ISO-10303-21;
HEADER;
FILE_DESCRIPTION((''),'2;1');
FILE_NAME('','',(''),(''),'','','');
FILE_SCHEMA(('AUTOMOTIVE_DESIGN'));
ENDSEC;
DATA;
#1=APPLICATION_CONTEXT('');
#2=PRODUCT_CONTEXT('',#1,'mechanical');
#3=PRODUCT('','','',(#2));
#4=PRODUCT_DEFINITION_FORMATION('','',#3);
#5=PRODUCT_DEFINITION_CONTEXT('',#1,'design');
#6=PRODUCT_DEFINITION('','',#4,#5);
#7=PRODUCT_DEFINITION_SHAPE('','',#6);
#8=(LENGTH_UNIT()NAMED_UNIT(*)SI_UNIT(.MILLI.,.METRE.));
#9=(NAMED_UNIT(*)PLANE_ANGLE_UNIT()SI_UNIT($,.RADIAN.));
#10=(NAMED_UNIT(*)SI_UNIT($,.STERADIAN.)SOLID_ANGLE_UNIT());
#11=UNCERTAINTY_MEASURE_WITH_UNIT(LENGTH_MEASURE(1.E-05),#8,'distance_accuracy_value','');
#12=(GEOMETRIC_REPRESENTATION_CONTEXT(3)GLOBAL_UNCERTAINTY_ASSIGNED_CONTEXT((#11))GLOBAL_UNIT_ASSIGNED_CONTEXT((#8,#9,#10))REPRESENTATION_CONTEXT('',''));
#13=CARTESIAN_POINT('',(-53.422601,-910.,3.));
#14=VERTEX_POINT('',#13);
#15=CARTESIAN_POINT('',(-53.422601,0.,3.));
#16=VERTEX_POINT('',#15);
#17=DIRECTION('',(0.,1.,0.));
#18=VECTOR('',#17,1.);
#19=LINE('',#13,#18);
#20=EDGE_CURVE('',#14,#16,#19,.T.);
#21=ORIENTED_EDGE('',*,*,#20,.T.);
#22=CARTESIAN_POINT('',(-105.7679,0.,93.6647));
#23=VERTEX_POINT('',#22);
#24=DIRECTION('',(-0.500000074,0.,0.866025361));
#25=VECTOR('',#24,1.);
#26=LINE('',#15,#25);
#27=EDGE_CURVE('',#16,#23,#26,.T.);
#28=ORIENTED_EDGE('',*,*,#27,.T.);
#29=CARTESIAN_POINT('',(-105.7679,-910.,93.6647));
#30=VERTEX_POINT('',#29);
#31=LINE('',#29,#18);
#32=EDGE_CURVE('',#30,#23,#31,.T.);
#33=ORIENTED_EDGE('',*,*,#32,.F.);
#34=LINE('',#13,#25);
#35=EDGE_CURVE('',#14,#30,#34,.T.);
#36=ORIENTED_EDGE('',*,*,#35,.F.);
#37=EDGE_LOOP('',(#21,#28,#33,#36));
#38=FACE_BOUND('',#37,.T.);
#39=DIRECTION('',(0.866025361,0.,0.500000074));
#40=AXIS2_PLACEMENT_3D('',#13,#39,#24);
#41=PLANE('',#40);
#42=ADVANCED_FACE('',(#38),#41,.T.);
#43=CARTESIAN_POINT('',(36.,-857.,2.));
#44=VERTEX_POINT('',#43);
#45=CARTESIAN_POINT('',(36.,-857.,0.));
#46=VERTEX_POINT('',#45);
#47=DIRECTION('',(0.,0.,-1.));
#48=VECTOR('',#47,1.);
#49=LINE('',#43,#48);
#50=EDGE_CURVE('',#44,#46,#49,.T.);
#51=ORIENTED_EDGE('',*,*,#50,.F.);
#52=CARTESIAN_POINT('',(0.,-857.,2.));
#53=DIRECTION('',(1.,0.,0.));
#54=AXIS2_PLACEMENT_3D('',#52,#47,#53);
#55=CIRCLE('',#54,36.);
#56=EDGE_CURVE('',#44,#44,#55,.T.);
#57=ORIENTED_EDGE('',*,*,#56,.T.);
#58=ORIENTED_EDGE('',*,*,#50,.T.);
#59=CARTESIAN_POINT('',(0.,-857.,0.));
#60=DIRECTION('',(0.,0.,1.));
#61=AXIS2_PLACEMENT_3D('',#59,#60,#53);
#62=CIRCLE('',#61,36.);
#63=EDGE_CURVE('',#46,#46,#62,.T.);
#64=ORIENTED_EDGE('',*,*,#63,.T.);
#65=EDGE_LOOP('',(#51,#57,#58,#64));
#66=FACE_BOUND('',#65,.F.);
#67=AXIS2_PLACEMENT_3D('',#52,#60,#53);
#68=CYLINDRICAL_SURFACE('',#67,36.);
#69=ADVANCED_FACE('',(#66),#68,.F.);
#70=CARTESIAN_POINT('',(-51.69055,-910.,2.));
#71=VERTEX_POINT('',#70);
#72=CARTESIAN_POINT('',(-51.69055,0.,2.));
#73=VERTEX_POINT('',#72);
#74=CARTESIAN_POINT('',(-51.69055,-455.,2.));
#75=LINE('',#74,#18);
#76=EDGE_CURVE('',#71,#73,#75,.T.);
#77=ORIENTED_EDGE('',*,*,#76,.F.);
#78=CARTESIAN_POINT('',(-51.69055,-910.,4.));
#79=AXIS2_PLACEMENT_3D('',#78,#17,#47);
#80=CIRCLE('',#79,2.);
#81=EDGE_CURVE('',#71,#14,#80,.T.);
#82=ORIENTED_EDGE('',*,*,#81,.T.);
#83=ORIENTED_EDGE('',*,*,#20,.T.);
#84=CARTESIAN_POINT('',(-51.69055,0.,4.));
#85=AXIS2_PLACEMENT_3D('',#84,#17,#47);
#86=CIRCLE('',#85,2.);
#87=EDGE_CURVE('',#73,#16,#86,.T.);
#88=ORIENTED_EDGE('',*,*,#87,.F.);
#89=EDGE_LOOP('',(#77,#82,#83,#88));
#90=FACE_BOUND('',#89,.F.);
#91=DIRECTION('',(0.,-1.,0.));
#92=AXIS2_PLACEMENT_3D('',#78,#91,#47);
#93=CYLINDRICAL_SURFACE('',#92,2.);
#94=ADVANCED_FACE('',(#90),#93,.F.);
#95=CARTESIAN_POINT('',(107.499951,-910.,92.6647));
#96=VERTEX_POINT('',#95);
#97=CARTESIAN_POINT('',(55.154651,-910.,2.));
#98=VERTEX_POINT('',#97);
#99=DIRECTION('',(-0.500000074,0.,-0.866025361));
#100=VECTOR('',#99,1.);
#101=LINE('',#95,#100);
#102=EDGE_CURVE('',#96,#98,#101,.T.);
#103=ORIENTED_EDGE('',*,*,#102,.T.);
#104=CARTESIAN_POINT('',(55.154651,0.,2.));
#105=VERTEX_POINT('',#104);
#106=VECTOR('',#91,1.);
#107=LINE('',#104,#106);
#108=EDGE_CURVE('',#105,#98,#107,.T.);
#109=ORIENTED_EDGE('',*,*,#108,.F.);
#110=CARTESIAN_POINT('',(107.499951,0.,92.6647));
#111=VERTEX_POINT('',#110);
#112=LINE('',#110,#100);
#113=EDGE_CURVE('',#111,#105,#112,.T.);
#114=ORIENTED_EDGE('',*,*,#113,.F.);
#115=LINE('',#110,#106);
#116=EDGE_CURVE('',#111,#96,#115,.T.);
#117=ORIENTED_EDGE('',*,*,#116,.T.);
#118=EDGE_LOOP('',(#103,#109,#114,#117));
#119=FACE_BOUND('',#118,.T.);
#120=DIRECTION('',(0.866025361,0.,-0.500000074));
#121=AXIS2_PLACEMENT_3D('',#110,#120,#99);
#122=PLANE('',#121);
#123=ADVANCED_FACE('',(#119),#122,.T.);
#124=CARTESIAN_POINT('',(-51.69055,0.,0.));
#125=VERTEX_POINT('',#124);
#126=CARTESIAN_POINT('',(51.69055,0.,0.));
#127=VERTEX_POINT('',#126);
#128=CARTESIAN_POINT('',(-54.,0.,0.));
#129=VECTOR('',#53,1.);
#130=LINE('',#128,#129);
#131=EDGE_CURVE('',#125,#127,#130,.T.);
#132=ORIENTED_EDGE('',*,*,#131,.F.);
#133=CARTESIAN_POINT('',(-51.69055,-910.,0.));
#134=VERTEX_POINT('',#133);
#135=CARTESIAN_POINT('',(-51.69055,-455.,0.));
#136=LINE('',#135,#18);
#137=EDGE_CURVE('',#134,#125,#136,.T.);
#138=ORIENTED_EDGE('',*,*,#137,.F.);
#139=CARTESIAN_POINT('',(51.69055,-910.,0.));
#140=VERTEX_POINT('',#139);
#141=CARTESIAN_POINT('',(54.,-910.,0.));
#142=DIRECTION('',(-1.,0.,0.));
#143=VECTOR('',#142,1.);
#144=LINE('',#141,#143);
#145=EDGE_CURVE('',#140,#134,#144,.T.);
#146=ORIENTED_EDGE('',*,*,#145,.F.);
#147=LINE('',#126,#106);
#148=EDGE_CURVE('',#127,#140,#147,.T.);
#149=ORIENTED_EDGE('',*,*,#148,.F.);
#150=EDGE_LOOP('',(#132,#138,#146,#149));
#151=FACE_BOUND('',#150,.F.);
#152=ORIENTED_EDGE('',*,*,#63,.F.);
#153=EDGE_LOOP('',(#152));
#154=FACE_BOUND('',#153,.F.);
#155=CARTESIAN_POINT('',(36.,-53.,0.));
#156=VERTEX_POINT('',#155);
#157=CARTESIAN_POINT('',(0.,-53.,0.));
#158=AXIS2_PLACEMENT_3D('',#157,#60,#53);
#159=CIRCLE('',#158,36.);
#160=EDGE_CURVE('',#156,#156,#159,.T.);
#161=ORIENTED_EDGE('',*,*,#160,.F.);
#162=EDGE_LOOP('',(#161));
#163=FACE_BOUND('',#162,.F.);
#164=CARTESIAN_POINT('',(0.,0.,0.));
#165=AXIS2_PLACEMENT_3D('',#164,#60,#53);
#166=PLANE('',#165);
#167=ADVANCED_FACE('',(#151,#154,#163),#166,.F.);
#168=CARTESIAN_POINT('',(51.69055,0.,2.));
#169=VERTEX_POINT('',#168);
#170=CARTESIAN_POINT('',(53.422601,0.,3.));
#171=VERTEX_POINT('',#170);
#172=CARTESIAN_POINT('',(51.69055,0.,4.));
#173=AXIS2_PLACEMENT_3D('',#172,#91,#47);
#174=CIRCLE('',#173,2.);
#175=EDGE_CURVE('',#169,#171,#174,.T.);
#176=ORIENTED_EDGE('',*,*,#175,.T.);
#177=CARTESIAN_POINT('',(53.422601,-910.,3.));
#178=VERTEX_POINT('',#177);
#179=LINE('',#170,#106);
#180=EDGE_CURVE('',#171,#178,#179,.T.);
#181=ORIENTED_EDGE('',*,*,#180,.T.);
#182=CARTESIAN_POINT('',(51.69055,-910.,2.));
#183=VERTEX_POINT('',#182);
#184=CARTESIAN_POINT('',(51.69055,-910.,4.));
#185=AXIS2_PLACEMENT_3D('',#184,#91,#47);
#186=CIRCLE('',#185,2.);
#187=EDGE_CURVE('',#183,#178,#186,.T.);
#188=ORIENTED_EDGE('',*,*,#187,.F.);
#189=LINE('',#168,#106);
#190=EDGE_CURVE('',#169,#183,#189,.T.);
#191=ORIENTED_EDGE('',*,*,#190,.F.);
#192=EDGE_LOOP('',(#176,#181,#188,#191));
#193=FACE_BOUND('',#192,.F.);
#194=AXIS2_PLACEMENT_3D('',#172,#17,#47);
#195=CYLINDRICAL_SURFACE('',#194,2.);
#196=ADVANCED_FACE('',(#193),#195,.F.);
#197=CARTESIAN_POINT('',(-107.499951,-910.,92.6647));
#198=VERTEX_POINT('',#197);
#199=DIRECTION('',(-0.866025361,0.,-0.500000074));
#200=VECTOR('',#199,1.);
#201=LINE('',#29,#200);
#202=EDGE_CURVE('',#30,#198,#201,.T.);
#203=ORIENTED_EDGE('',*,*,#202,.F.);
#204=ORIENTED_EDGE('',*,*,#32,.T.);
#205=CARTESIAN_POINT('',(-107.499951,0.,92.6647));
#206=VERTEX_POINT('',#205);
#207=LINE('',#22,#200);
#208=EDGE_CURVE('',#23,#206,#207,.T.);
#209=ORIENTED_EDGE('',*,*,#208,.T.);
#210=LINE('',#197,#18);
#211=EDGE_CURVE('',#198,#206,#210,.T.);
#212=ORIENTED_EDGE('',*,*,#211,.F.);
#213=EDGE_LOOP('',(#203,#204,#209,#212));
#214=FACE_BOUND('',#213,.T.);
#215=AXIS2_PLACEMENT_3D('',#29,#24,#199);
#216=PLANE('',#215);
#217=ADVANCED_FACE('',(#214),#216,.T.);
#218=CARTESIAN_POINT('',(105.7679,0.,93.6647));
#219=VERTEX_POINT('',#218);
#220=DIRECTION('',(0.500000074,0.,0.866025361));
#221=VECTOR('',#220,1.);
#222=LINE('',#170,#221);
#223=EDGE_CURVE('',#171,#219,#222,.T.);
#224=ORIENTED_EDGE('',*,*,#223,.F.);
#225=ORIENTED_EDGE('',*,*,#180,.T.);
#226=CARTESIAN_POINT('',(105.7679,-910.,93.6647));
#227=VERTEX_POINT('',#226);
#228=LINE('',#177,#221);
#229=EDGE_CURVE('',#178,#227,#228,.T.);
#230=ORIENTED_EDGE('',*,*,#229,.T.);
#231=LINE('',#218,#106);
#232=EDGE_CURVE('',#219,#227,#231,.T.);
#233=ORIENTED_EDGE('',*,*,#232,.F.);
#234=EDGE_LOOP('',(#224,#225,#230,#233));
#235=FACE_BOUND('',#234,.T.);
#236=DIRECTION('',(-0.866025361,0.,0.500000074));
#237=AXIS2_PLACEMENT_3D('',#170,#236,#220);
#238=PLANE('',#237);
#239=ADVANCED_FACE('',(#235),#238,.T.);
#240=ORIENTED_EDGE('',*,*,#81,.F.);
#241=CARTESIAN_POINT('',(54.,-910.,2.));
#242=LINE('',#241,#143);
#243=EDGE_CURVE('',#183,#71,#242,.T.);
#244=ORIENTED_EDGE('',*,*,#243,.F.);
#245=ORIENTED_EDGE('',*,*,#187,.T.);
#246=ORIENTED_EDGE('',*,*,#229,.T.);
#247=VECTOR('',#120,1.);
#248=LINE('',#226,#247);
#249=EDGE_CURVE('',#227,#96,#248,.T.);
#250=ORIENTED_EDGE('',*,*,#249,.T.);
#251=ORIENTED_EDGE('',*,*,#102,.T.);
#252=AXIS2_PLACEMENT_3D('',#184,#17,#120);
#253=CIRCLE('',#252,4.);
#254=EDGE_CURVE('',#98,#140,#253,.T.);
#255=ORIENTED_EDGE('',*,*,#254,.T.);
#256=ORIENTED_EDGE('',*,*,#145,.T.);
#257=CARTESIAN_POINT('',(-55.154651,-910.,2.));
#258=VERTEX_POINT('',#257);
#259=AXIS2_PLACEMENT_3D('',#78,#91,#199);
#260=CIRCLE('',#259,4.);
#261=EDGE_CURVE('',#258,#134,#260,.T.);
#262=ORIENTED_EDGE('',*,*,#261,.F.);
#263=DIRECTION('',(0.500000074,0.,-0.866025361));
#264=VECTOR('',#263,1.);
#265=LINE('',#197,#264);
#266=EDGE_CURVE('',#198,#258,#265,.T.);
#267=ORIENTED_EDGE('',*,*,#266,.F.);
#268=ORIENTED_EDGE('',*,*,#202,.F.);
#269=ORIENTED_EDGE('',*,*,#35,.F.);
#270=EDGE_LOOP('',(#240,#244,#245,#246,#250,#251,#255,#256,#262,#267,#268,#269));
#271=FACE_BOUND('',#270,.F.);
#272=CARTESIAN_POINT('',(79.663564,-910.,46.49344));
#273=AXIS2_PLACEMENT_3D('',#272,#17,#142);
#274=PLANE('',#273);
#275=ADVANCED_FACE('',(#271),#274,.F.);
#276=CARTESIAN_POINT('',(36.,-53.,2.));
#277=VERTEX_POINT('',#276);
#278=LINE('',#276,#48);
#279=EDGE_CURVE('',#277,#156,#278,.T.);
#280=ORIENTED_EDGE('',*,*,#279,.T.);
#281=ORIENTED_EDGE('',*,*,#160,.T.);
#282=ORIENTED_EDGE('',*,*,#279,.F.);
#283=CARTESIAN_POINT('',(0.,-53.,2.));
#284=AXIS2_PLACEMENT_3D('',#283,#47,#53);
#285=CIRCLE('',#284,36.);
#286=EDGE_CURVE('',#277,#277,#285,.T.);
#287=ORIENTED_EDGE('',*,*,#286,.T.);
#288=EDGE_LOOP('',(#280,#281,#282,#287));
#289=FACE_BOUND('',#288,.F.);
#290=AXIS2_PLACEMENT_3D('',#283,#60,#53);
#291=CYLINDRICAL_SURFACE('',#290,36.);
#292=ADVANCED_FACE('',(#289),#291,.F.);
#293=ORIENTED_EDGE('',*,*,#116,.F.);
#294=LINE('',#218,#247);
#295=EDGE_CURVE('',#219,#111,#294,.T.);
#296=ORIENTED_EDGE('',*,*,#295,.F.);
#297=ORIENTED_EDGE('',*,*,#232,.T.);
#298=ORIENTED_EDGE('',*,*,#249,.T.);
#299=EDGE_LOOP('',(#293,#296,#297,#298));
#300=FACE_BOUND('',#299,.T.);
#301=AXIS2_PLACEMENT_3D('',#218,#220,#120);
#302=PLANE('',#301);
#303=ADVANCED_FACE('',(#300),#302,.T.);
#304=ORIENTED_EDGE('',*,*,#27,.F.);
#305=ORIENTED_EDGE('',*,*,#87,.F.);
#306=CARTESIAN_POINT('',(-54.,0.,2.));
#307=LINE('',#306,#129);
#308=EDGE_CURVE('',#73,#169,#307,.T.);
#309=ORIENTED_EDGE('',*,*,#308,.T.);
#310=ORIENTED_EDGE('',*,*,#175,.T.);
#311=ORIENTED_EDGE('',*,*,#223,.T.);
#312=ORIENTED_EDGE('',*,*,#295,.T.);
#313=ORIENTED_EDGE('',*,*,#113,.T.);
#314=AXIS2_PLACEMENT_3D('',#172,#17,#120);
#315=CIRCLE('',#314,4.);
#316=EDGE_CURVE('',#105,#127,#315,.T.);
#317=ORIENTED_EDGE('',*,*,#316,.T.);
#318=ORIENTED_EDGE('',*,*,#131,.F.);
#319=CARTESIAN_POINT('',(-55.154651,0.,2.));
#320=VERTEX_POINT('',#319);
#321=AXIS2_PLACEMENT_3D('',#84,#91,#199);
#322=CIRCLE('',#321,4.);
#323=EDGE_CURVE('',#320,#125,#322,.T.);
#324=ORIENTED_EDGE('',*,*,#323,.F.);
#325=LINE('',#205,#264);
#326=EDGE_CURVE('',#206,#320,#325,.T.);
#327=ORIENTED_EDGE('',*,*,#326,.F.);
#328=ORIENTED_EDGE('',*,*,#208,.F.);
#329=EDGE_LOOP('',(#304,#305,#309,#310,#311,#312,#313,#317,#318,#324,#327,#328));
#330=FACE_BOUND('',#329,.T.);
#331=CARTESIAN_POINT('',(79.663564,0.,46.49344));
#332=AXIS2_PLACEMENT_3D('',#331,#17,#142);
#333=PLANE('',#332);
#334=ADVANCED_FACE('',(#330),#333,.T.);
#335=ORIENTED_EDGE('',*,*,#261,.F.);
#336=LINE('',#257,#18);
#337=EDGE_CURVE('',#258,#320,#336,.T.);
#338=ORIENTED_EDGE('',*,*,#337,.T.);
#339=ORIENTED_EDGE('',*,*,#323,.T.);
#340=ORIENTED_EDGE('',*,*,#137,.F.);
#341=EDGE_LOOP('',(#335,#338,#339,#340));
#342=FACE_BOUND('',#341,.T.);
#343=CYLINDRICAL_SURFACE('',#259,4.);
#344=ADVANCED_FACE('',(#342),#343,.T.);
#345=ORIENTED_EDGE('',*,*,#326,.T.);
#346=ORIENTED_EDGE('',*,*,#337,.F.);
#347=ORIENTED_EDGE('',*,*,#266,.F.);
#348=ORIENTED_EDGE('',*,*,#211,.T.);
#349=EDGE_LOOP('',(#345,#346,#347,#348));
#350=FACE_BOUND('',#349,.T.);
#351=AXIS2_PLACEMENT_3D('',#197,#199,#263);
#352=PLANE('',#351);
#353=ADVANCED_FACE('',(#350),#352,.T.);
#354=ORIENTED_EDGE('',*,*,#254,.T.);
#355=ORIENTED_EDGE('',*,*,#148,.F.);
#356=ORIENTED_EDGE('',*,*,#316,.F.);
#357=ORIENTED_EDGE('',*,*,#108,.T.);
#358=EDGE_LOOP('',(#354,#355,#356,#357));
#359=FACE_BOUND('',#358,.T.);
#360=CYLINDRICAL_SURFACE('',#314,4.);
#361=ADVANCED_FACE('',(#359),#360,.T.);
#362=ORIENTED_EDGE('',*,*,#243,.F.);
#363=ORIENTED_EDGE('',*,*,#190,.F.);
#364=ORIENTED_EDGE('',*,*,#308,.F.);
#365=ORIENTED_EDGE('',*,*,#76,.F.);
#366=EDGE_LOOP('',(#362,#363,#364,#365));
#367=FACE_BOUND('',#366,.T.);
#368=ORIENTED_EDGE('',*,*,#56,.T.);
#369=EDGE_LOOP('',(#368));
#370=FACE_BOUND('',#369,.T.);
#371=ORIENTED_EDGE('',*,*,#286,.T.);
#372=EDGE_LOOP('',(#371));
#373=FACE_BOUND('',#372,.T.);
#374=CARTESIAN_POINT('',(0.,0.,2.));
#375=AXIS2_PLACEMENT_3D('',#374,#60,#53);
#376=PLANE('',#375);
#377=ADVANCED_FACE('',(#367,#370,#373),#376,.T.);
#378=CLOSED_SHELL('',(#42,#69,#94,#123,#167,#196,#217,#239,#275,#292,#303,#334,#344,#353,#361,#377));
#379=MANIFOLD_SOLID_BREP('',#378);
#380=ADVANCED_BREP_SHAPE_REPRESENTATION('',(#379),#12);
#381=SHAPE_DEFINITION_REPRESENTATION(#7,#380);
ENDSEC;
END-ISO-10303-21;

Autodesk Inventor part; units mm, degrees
ref_plane "YZ Plane" through (0, 0, 0) normal (1, 0, 0) x (0, 1, 0)
ref_plane "XZ Plane" through (0, 0, 0) normal (0, 1, 0) x (-1, 0, 0)
ref_plane "XY Plane" through (0, 0, 0) normal (0, 0, 1) x (1, 0, 0)
sketch "Sketch9" plane through (0, 0, 0) normal (0, 0, 1) x (1, 0, 0)
  line L0 (-54, 0) -> (54, 0)
  line L1 (54, 0) -> (54, -910)
  line L2 (54, -910) -> (-54, -910)
  line L3 (-54, -910) -> (-54, 0)
  point P0 (0, 0)
  point P1 (0, 0)
  dimension "d49" = 108
  dimension "d50" = 910
extrude "Plate4" add sketch "Sketch9" along normal blind 2
sketch "Sketch10" plane through (52.2679, 0, 1) normal (0.8660254, 0, -0.5) x (0, 1, 0)
  line L0 (-910, 0) -> (0, 0)
  line L1 (0, 0) -> (0, 107)
  line L2 (0, 107) -> (-910, 107)
  line L3 (-910, 107) -> (-910, 0)
edge flange "Flange2" height 107 angle 60 thickness 2 bend radius 2 thickness toward (0.8660254, 0, -0.5) relief tear relief width 2 relief depth 1 corner gap 2 corner form 0 edges at (54, -455, 2) (-54, -455, 2) wall of the first edge with corners at (52.2679, -910, 1) (52.2679, 0, 1) (105.7679, 0, 93.6647) (105.7679, -910, 93.6647)
bend "Bend2"
corner "Corner2"
sketch "Sketch11" plane through (0, 0, 2) normal (0, 0, 1) x (1, 0, 0)
  circle A0 centre (0, -53) radius 36
  circle A1 centre (0, -857) radius 36
  line L0 (-51.6906, 0) -> (51.6906, 0) projected
  line L1 (-51.6906, -910) -> (51.6906, -910) projected
  line L2 (0, 0) -> (0, -17)
  line L3 (0, -910) -> (0, -893)
  point P0 (0, 0)
  dimension "d62" = 72
  dimension "d68" = 17
  dimension "d69" = 804
extrude "Cut3" cut sketch "Sketch11" against normal blind 2
equation "\"d65\" = Thickness"
equation "\"d51\" = Thickness"
equation "\"d52\" = BendReliefWidth"
equation "\"d53\" = BendReliefDepth"
equation "\"d54\" = MinimumRemnant"
equation "\"d55\" = TransitionRadius"
equation "\"d58\" = BendRadius"
equation "\"d59\" = CornerReliefSize"
equation "\"d60\" = GapSize"
equation "\"d61\" = JacobiRadiusSize"
equation "\"BendRadius\" = Thickness"
equation "\"BendReliefWidth\" = Thickness"
equation "\"BendReliefDepth\" = 0.5 * Thickness"
equation "\"CornerReliefSize\" = 4 * Thickness"
equation "\"MinimumRemnant\" = 2 * Thickness"
equation "\"TransitionRadius\" = BendRadius"
equation "\"JacobiRadiusSize\" = BendRadius"
equation "\"GapSize\" = Thickness"
equation "\"Octaeder_side\" = d41"
equation "\"Octaeder_flange_lenth\" = d42"
equation "\"Thickness\" = 2"
equation "\"d41\" = 55.918831"
equation "\"d42\" = 72.5"
properties part number "DSB 122 hex side 1"
